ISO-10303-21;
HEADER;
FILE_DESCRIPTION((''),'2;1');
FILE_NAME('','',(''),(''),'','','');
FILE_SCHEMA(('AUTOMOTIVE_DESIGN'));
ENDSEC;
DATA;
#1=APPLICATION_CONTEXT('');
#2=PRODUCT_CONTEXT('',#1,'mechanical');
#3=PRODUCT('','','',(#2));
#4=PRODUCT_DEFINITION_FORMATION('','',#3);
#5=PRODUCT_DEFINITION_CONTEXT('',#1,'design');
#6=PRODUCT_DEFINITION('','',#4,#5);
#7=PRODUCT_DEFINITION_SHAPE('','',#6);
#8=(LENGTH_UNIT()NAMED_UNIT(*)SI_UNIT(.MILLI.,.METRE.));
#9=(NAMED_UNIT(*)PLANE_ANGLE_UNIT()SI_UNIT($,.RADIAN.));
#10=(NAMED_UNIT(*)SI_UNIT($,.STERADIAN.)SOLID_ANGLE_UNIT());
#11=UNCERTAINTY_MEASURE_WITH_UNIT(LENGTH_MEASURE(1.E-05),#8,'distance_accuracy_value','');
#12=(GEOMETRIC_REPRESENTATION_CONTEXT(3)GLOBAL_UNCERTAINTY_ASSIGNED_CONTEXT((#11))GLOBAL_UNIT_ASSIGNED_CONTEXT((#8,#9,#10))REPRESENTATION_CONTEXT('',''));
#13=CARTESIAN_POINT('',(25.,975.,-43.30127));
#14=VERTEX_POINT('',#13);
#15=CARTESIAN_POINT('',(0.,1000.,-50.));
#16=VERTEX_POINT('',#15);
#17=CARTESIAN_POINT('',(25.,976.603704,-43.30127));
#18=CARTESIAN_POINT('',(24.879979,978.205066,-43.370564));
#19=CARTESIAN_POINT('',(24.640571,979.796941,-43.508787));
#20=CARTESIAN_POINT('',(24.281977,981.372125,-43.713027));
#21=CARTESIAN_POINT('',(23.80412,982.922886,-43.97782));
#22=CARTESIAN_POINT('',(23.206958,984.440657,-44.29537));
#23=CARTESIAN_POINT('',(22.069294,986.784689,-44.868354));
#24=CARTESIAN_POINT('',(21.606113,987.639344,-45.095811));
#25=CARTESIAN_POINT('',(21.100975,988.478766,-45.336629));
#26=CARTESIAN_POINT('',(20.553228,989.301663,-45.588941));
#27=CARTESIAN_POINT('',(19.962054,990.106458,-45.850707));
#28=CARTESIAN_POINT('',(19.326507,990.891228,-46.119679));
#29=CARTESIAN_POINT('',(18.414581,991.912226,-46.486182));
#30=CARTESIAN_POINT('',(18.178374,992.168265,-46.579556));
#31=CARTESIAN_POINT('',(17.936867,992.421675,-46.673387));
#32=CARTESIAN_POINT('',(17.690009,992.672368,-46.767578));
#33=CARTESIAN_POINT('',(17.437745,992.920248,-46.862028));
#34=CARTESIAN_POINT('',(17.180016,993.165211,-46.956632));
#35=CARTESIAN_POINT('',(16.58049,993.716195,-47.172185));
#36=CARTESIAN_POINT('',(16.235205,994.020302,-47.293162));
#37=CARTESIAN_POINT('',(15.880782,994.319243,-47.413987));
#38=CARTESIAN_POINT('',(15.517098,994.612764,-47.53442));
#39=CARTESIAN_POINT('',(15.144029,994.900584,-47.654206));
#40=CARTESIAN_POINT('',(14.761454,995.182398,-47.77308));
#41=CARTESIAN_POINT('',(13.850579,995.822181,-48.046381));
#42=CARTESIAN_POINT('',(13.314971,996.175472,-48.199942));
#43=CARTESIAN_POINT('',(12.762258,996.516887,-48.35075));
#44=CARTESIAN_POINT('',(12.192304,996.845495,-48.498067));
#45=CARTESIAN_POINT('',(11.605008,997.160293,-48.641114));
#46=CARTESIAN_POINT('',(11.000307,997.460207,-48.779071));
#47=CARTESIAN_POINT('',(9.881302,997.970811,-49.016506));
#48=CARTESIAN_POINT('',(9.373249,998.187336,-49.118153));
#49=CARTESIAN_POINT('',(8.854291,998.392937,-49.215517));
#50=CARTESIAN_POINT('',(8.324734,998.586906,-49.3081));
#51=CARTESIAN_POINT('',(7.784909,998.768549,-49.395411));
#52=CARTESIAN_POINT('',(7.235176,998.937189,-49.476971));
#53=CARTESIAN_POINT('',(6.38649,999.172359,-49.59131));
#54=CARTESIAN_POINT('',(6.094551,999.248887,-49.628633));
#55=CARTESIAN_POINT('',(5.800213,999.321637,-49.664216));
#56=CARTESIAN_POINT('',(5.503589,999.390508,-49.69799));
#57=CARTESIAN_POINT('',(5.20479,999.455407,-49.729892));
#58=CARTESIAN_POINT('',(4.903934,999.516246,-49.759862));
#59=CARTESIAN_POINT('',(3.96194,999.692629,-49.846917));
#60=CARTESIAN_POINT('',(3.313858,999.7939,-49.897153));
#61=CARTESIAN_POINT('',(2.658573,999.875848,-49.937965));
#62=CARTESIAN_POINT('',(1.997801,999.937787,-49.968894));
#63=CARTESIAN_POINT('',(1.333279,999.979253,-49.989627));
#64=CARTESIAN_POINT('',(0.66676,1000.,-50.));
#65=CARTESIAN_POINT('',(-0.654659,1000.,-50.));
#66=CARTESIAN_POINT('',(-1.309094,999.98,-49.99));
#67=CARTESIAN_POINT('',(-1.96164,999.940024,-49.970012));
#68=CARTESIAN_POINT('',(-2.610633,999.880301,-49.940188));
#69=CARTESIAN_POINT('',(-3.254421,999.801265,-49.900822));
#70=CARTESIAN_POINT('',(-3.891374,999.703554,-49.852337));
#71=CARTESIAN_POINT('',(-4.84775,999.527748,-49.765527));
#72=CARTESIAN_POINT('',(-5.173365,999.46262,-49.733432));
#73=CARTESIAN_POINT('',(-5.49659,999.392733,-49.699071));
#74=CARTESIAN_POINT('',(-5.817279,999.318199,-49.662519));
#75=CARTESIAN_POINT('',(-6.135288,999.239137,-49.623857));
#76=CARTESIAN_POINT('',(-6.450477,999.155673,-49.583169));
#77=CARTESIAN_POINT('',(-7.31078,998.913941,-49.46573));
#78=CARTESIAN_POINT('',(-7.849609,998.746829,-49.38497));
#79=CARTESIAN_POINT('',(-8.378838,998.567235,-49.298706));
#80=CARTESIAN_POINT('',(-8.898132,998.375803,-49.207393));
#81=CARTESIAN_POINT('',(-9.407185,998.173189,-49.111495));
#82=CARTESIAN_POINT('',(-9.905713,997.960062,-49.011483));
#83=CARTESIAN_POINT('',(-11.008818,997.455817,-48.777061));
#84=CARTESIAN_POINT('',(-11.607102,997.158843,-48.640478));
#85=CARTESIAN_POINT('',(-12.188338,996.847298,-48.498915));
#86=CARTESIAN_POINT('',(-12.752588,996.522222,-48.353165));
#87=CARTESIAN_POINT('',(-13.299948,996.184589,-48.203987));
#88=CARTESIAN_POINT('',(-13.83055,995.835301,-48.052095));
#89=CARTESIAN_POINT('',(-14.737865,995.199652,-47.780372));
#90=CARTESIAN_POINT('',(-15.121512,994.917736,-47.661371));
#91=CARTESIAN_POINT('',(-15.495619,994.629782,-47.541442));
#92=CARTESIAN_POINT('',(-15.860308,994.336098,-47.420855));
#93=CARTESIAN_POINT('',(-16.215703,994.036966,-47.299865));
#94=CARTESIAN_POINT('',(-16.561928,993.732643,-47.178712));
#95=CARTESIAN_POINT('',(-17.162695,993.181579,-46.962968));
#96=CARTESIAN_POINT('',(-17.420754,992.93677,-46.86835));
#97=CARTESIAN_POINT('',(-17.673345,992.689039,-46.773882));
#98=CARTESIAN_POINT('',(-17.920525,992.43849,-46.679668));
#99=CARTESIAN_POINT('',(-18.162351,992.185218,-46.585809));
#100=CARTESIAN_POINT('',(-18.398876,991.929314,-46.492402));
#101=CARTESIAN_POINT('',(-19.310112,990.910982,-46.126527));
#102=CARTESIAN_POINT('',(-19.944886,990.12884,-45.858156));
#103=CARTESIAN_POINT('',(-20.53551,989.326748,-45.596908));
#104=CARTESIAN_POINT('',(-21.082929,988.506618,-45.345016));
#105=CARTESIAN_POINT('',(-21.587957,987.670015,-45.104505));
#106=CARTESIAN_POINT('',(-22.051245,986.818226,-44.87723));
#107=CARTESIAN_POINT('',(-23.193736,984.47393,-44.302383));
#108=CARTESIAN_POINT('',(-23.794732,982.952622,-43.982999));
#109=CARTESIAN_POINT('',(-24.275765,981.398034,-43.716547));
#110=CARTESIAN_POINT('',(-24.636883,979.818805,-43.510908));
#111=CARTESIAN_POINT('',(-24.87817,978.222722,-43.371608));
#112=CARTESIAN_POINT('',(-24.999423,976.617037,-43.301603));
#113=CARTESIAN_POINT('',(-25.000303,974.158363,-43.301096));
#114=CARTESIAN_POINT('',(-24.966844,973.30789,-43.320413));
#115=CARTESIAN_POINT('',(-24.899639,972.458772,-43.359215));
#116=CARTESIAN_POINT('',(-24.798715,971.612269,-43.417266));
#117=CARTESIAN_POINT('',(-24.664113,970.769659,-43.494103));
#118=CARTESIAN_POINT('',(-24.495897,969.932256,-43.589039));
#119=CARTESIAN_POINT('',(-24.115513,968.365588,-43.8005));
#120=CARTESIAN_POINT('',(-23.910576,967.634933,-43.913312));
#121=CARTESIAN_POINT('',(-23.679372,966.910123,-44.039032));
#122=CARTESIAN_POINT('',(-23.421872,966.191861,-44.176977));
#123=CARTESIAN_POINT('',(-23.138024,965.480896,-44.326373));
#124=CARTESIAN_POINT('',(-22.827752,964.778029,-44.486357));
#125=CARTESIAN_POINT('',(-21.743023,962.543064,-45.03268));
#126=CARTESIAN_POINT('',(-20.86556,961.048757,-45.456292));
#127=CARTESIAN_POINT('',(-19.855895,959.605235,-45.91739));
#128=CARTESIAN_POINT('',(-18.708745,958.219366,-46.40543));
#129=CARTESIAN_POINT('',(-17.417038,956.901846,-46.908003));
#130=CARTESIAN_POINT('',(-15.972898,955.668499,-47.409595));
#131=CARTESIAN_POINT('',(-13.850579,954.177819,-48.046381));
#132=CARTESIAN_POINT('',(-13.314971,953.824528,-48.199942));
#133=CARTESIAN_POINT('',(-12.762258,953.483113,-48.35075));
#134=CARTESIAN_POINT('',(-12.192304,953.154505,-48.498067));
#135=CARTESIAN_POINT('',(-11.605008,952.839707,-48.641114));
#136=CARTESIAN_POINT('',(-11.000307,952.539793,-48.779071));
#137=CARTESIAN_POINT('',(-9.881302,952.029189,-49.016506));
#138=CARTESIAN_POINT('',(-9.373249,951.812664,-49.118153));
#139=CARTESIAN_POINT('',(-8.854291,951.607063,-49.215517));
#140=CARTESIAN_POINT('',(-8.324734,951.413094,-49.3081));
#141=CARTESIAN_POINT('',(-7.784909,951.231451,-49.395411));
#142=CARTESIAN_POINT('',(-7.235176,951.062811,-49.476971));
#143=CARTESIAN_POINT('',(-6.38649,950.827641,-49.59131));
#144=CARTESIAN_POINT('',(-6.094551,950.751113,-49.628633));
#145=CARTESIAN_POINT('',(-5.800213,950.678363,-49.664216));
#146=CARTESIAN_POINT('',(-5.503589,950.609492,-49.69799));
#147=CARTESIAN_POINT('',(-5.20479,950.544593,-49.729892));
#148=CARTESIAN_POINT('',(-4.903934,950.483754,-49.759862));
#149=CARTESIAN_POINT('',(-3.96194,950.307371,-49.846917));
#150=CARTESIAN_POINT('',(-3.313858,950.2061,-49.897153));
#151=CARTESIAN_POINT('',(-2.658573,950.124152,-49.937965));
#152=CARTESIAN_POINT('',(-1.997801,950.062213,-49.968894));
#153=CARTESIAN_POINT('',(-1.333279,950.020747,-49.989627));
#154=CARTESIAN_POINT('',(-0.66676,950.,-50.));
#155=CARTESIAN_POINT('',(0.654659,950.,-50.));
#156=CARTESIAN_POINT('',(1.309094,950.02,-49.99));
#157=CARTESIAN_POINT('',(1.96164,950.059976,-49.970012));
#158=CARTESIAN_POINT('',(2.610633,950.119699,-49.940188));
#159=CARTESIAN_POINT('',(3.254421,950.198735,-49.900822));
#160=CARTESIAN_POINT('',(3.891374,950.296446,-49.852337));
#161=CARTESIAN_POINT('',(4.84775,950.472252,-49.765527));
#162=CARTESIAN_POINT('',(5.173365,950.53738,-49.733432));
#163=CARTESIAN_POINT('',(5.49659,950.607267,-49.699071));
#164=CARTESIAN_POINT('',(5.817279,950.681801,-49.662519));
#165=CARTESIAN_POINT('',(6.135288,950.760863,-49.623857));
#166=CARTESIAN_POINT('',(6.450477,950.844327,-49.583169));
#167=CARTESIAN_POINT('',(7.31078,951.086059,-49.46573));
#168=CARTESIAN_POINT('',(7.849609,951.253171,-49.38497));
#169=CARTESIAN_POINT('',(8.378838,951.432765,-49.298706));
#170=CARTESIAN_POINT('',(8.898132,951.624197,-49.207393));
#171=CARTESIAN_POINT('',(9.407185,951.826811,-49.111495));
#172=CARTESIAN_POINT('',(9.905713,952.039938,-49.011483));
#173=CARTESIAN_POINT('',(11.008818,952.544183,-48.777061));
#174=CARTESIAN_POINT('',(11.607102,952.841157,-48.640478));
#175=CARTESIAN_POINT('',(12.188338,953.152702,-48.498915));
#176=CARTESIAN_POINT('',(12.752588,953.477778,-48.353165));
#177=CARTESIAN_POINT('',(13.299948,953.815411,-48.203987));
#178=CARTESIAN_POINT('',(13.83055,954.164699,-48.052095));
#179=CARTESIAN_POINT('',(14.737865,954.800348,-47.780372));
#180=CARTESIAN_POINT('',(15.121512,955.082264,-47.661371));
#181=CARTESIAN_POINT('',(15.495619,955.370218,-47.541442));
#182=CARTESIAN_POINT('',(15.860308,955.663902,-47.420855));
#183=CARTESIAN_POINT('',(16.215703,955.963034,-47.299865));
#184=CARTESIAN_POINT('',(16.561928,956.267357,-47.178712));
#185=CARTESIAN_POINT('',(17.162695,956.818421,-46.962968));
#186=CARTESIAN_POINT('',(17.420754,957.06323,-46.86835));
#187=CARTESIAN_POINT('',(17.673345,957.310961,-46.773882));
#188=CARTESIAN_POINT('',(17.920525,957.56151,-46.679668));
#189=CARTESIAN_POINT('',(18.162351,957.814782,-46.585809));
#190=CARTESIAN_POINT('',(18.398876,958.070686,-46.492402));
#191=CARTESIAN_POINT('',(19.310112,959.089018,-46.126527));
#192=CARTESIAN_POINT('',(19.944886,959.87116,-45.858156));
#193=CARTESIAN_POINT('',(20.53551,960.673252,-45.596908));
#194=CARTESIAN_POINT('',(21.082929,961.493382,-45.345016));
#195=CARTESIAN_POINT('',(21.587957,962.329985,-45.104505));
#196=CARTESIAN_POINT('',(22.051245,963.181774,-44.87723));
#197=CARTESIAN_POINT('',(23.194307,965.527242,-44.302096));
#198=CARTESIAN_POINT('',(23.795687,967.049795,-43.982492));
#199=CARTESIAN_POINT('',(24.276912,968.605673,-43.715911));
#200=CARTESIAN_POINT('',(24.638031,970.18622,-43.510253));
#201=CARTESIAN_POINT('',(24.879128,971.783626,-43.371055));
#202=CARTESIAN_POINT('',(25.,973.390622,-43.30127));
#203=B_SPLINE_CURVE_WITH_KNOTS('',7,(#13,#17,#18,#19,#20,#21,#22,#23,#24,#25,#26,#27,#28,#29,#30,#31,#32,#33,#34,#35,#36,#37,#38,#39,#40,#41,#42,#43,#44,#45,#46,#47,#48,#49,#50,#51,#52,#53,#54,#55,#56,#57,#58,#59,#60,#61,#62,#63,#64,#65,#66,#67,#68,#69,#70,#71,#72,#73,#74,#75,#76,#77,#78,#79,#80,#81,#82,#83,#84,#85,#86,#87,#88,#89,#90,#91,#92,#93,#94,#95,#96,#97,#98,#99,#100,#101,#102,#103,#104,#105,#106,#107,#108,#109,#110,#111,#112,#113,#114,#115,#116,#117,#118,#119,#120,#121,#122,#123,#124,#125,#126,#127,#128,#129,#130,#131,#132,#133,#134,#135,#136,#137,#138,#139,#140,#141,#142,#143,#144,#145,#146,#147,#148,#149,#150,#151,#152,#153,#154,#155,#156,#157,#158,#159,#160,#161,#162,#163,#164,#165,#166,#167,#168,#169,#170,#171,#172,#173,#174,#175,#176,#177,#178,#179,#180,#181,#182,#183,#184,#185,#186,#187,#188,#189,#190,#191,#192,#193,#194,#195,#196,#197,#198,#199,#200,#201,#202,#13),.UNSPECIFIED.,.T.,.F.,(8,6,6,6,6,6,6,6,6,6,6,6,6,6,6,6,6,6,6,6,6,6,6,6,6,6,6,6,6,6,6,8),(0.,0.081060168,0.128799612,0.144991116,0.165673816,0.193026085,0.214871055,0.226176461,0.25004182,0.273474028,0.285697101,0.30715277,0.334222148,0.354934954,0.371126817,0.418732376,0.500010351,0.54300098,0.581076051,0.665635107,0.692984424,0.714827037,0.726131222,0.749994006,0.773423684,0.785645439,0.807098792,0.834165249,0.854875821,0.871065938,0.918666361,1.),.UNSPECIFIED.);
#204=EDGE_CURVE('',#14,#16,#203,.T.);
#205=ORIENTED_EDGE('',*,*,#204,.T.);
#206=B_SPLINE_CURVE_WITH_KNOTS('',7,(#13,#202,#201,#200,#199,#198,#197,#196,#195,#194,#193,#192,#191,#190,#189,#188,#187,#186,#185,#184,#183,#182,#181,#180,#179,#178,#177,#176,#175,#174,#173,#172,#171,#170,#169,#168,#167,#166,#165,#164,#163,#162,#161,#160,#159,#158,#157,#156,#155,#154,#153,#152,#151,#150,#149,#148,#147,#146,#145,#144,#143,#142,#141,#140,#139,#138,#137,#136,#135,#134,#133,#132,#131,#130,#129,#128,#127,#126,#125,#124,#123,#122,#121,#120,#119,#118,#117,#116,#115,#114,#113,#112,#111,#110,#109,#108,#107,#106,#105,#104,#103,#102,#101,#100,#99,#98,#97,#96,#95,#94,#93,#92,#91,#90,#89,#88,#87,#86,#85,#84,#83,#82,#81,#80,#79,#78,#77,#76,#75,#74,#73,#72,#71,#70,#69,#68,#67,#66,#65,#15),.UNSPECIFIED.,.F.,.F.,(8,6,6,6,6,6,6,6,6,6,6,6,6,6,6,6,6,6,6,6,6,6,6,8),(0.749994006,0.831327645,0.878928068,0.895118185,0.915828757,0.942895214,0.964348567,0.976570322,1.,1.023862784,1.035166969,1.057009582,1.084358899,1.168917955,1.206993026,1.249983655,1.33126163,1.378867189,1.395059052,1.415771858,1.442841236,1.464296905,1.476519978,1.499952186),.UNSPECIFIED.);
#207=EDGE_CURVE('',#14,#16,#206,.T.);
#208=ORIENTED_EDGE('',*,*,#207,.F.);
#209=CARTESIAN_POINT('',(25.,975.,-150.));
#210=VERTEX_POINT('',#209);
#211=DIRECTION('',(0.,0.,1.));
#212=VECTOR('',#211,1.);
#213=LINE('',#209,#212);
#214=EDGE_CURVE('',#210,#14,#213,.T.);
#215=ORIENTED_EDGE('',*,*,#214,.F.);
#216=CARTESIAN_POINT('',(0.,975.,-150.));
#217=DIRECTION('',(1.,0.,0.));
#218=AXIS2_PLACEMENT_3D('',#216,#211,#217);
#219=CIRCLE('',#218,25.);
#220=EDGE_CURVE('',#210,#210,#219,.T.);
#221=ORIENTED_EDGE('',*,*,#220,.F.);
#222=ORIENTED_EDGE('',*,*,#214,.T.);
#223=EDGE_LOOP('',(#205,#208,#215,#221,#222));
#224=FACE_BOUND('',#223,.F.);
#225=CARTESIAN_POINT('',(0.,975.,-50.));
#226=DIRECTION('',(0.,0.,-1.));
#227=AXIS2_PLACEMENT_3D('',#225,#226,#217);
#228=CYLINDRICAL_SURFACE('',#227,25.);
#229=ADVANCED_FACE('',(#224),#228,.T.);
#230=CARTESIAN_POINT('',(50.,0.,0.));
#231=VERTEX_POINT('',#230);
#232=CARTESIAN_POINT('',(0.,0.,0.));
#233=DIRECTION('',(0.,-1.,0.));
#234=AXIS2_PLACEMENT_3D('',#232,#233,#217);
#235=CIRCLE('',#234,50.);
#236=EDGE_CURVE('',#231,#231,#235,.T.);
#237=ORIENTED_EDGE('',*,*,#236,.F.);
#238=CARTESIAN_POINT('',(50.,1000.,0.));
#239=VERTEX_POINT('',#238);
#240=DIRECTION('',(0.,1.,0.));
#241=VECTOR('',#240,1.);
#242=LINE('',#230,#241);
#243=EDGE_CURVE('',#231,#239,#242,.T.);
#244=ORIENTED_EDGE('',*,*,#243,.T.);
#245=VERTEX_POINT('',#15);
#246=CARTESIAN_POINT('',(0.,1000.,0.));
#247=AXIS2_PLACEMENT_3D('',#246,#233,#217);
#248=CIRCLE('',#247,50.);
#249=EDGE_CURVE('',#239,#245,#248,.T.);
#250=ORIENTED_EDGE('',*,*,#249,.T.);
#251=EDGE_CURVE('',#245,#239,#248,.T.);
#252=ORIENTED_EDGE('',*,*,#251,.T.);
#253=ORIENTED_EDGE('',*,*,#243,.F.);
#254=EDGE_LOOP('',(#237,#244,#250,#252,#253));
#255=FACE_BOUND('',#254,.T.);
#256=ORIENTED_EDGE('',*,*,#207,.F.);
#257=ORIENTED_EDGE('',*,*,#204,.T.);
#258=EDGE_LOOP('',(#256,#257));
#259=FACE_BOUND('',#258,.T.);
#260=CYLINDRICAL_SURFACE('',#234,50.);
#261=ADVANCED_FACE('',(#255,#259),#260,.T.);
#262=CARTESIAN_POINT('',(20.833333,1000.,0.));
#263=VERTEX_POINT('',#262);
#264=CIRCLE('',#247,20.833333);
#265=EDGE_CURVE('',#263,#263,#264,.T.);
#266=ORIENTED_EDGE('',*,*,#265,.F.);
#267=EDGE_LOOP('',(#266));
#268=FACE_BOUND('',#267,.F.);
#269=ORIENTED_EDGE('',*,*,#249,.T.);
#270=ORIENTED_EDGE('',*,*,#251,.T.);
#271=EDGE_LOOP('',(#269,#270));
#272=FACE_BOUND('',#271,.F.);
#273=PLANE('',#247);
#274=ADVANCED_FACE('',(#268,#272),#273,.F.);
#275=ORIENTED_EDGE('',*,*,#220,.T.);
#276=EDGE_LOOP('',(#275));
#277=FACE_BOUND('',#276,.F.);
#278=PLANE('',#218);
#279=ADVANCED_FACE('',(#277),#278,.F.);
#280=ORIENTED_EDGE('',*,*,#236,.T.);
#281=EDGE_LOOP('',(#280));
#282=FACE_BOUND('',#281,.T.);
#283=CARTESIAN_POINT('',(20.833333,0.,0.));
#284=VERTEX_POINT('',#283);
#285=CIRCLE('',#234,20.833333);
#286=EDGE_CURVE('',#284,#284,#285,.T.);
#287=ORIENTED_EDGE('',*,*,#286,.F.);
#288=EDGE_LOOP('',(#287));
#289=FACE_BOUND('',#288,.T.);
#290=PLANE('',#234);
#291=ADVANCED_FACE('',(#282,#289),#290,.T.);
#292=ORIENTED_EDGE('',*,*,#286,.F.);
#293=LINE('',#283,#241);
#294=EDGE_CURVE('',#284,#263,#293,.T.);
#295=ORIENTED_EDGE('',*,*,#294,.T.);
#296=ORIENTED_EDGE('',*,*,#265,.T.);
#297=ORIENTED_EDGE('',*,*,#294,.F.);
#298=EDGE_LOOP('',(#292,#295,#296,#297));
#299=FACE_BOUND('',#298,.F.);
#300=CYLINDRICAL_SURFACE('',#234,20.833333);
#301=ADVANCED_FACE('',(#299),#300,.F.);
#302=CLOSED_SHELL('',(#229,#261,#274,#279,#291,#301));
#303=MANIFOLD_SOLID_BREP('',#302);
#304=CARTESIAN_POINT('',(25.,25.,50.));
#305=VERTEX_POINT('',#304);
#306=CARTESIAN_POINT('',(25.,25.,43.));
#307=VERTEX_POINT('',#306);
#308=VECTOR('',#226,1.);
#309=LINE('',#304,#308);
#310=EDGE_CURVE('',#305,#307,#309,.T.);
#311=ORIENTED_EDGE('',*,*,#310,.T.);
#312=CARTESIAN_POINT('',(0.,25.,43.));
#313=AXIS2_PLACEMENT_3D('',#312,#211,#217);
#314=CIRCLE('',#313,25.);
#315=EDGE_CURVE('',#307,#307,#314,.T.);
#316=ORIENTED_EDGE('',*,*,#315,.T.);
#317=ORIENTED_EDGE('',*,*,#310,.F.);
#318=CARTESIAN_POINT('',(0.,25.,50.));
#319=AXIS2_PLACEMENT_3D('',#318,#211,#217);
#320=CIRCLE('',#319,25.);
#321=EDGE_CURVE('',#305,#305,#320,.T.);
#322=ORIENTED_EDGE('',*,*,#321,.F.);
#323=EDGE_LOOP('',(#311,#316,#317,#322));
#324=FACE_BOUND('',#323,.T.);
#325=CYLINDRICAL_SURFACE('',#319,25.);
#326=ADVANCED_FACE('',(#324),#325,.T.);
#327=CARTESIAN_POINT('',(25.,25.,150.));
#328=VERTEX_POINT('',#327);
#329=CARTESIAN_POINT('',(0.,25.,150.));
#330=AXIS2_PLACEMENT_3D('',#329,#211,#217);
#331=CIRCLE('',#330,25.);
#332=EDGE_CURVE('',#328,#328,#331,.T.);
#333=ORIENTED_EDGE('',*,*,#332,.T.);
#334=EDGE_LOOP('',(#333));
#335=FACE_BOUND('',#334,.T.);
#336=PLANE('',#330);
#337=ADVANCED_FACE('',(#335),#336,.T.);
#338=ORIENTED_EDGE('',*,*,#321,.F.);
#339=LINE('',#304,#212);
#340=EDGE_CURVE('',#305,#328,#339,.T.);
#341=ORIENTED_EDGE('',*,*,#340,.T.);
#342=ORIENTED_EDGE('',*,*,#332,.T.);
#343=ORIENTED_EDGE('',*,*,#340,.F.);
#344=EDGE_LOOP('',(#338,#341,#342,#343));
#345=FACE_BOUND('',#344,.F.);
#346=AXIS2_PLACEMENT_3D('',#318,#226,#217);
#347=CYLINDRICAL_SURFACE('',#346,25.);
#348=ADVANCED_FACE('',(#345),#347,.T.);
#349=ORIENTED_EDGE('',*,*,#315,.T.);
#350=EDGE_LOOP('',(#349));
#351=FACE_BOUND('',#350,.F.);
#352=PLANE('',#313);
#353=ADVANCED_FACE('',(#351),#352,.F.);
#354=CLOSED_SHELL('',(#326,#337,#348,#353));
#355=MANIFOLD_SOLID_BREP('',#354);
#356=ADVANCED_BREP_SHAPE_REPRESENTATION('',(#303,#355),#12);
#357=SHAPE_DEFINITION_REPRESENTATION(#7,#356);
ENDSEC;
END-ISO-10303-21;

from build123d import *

# Parameters (mm, degrees)
F0_R          = 50
F0_R_2        = 20.8333333333
F1_DEPTH      = 1000
F5_R          = 25
F6_DEPTH      = 100
F6_DEPTH_BACK = 7
F3_R          = 25
F7_DEPTH      = 7
F7_DEPTH_BACK = 100


# Not quite as in the source:
# - a feature names something its author has since deleted; it is built from what else it names


with BuildPart() as f1:
    # F0 (on Front) → F1 (new body)
    with BuildSketch(Plane.XZ):
        Circle(F0_R)
        Circle(F0_R_2, mode=Mode.SUBTRACT)
    extrude(amount=-F1_DEPTH)

    # F5 (on offset) → F6 (join, two sides)
    with BuildSketch(Plane.XY.offset(-50)) as f6_sk:
        with Locations((0, 975)):
            Circle(F5_R)
    extrude(amount=-F6_DEPTH)
    extrude(f6_sk.sketch, amount=F6_DEPTH_BACK)


with BuildPart() as f7:
    # F3 (on offset) → F7 (new body, two sides)
    with BuildSketch(Plane.XY.offset(50)) as f7_sk:
        with Locations((0, 25)):
            Circle(F3_R)
    extrude(amount=-F7_DEPTH)
    extrude(f7_sk.sketch, amount=F7_DEPTH_BACK)


solid = Compound([f1.part, f7.part])
